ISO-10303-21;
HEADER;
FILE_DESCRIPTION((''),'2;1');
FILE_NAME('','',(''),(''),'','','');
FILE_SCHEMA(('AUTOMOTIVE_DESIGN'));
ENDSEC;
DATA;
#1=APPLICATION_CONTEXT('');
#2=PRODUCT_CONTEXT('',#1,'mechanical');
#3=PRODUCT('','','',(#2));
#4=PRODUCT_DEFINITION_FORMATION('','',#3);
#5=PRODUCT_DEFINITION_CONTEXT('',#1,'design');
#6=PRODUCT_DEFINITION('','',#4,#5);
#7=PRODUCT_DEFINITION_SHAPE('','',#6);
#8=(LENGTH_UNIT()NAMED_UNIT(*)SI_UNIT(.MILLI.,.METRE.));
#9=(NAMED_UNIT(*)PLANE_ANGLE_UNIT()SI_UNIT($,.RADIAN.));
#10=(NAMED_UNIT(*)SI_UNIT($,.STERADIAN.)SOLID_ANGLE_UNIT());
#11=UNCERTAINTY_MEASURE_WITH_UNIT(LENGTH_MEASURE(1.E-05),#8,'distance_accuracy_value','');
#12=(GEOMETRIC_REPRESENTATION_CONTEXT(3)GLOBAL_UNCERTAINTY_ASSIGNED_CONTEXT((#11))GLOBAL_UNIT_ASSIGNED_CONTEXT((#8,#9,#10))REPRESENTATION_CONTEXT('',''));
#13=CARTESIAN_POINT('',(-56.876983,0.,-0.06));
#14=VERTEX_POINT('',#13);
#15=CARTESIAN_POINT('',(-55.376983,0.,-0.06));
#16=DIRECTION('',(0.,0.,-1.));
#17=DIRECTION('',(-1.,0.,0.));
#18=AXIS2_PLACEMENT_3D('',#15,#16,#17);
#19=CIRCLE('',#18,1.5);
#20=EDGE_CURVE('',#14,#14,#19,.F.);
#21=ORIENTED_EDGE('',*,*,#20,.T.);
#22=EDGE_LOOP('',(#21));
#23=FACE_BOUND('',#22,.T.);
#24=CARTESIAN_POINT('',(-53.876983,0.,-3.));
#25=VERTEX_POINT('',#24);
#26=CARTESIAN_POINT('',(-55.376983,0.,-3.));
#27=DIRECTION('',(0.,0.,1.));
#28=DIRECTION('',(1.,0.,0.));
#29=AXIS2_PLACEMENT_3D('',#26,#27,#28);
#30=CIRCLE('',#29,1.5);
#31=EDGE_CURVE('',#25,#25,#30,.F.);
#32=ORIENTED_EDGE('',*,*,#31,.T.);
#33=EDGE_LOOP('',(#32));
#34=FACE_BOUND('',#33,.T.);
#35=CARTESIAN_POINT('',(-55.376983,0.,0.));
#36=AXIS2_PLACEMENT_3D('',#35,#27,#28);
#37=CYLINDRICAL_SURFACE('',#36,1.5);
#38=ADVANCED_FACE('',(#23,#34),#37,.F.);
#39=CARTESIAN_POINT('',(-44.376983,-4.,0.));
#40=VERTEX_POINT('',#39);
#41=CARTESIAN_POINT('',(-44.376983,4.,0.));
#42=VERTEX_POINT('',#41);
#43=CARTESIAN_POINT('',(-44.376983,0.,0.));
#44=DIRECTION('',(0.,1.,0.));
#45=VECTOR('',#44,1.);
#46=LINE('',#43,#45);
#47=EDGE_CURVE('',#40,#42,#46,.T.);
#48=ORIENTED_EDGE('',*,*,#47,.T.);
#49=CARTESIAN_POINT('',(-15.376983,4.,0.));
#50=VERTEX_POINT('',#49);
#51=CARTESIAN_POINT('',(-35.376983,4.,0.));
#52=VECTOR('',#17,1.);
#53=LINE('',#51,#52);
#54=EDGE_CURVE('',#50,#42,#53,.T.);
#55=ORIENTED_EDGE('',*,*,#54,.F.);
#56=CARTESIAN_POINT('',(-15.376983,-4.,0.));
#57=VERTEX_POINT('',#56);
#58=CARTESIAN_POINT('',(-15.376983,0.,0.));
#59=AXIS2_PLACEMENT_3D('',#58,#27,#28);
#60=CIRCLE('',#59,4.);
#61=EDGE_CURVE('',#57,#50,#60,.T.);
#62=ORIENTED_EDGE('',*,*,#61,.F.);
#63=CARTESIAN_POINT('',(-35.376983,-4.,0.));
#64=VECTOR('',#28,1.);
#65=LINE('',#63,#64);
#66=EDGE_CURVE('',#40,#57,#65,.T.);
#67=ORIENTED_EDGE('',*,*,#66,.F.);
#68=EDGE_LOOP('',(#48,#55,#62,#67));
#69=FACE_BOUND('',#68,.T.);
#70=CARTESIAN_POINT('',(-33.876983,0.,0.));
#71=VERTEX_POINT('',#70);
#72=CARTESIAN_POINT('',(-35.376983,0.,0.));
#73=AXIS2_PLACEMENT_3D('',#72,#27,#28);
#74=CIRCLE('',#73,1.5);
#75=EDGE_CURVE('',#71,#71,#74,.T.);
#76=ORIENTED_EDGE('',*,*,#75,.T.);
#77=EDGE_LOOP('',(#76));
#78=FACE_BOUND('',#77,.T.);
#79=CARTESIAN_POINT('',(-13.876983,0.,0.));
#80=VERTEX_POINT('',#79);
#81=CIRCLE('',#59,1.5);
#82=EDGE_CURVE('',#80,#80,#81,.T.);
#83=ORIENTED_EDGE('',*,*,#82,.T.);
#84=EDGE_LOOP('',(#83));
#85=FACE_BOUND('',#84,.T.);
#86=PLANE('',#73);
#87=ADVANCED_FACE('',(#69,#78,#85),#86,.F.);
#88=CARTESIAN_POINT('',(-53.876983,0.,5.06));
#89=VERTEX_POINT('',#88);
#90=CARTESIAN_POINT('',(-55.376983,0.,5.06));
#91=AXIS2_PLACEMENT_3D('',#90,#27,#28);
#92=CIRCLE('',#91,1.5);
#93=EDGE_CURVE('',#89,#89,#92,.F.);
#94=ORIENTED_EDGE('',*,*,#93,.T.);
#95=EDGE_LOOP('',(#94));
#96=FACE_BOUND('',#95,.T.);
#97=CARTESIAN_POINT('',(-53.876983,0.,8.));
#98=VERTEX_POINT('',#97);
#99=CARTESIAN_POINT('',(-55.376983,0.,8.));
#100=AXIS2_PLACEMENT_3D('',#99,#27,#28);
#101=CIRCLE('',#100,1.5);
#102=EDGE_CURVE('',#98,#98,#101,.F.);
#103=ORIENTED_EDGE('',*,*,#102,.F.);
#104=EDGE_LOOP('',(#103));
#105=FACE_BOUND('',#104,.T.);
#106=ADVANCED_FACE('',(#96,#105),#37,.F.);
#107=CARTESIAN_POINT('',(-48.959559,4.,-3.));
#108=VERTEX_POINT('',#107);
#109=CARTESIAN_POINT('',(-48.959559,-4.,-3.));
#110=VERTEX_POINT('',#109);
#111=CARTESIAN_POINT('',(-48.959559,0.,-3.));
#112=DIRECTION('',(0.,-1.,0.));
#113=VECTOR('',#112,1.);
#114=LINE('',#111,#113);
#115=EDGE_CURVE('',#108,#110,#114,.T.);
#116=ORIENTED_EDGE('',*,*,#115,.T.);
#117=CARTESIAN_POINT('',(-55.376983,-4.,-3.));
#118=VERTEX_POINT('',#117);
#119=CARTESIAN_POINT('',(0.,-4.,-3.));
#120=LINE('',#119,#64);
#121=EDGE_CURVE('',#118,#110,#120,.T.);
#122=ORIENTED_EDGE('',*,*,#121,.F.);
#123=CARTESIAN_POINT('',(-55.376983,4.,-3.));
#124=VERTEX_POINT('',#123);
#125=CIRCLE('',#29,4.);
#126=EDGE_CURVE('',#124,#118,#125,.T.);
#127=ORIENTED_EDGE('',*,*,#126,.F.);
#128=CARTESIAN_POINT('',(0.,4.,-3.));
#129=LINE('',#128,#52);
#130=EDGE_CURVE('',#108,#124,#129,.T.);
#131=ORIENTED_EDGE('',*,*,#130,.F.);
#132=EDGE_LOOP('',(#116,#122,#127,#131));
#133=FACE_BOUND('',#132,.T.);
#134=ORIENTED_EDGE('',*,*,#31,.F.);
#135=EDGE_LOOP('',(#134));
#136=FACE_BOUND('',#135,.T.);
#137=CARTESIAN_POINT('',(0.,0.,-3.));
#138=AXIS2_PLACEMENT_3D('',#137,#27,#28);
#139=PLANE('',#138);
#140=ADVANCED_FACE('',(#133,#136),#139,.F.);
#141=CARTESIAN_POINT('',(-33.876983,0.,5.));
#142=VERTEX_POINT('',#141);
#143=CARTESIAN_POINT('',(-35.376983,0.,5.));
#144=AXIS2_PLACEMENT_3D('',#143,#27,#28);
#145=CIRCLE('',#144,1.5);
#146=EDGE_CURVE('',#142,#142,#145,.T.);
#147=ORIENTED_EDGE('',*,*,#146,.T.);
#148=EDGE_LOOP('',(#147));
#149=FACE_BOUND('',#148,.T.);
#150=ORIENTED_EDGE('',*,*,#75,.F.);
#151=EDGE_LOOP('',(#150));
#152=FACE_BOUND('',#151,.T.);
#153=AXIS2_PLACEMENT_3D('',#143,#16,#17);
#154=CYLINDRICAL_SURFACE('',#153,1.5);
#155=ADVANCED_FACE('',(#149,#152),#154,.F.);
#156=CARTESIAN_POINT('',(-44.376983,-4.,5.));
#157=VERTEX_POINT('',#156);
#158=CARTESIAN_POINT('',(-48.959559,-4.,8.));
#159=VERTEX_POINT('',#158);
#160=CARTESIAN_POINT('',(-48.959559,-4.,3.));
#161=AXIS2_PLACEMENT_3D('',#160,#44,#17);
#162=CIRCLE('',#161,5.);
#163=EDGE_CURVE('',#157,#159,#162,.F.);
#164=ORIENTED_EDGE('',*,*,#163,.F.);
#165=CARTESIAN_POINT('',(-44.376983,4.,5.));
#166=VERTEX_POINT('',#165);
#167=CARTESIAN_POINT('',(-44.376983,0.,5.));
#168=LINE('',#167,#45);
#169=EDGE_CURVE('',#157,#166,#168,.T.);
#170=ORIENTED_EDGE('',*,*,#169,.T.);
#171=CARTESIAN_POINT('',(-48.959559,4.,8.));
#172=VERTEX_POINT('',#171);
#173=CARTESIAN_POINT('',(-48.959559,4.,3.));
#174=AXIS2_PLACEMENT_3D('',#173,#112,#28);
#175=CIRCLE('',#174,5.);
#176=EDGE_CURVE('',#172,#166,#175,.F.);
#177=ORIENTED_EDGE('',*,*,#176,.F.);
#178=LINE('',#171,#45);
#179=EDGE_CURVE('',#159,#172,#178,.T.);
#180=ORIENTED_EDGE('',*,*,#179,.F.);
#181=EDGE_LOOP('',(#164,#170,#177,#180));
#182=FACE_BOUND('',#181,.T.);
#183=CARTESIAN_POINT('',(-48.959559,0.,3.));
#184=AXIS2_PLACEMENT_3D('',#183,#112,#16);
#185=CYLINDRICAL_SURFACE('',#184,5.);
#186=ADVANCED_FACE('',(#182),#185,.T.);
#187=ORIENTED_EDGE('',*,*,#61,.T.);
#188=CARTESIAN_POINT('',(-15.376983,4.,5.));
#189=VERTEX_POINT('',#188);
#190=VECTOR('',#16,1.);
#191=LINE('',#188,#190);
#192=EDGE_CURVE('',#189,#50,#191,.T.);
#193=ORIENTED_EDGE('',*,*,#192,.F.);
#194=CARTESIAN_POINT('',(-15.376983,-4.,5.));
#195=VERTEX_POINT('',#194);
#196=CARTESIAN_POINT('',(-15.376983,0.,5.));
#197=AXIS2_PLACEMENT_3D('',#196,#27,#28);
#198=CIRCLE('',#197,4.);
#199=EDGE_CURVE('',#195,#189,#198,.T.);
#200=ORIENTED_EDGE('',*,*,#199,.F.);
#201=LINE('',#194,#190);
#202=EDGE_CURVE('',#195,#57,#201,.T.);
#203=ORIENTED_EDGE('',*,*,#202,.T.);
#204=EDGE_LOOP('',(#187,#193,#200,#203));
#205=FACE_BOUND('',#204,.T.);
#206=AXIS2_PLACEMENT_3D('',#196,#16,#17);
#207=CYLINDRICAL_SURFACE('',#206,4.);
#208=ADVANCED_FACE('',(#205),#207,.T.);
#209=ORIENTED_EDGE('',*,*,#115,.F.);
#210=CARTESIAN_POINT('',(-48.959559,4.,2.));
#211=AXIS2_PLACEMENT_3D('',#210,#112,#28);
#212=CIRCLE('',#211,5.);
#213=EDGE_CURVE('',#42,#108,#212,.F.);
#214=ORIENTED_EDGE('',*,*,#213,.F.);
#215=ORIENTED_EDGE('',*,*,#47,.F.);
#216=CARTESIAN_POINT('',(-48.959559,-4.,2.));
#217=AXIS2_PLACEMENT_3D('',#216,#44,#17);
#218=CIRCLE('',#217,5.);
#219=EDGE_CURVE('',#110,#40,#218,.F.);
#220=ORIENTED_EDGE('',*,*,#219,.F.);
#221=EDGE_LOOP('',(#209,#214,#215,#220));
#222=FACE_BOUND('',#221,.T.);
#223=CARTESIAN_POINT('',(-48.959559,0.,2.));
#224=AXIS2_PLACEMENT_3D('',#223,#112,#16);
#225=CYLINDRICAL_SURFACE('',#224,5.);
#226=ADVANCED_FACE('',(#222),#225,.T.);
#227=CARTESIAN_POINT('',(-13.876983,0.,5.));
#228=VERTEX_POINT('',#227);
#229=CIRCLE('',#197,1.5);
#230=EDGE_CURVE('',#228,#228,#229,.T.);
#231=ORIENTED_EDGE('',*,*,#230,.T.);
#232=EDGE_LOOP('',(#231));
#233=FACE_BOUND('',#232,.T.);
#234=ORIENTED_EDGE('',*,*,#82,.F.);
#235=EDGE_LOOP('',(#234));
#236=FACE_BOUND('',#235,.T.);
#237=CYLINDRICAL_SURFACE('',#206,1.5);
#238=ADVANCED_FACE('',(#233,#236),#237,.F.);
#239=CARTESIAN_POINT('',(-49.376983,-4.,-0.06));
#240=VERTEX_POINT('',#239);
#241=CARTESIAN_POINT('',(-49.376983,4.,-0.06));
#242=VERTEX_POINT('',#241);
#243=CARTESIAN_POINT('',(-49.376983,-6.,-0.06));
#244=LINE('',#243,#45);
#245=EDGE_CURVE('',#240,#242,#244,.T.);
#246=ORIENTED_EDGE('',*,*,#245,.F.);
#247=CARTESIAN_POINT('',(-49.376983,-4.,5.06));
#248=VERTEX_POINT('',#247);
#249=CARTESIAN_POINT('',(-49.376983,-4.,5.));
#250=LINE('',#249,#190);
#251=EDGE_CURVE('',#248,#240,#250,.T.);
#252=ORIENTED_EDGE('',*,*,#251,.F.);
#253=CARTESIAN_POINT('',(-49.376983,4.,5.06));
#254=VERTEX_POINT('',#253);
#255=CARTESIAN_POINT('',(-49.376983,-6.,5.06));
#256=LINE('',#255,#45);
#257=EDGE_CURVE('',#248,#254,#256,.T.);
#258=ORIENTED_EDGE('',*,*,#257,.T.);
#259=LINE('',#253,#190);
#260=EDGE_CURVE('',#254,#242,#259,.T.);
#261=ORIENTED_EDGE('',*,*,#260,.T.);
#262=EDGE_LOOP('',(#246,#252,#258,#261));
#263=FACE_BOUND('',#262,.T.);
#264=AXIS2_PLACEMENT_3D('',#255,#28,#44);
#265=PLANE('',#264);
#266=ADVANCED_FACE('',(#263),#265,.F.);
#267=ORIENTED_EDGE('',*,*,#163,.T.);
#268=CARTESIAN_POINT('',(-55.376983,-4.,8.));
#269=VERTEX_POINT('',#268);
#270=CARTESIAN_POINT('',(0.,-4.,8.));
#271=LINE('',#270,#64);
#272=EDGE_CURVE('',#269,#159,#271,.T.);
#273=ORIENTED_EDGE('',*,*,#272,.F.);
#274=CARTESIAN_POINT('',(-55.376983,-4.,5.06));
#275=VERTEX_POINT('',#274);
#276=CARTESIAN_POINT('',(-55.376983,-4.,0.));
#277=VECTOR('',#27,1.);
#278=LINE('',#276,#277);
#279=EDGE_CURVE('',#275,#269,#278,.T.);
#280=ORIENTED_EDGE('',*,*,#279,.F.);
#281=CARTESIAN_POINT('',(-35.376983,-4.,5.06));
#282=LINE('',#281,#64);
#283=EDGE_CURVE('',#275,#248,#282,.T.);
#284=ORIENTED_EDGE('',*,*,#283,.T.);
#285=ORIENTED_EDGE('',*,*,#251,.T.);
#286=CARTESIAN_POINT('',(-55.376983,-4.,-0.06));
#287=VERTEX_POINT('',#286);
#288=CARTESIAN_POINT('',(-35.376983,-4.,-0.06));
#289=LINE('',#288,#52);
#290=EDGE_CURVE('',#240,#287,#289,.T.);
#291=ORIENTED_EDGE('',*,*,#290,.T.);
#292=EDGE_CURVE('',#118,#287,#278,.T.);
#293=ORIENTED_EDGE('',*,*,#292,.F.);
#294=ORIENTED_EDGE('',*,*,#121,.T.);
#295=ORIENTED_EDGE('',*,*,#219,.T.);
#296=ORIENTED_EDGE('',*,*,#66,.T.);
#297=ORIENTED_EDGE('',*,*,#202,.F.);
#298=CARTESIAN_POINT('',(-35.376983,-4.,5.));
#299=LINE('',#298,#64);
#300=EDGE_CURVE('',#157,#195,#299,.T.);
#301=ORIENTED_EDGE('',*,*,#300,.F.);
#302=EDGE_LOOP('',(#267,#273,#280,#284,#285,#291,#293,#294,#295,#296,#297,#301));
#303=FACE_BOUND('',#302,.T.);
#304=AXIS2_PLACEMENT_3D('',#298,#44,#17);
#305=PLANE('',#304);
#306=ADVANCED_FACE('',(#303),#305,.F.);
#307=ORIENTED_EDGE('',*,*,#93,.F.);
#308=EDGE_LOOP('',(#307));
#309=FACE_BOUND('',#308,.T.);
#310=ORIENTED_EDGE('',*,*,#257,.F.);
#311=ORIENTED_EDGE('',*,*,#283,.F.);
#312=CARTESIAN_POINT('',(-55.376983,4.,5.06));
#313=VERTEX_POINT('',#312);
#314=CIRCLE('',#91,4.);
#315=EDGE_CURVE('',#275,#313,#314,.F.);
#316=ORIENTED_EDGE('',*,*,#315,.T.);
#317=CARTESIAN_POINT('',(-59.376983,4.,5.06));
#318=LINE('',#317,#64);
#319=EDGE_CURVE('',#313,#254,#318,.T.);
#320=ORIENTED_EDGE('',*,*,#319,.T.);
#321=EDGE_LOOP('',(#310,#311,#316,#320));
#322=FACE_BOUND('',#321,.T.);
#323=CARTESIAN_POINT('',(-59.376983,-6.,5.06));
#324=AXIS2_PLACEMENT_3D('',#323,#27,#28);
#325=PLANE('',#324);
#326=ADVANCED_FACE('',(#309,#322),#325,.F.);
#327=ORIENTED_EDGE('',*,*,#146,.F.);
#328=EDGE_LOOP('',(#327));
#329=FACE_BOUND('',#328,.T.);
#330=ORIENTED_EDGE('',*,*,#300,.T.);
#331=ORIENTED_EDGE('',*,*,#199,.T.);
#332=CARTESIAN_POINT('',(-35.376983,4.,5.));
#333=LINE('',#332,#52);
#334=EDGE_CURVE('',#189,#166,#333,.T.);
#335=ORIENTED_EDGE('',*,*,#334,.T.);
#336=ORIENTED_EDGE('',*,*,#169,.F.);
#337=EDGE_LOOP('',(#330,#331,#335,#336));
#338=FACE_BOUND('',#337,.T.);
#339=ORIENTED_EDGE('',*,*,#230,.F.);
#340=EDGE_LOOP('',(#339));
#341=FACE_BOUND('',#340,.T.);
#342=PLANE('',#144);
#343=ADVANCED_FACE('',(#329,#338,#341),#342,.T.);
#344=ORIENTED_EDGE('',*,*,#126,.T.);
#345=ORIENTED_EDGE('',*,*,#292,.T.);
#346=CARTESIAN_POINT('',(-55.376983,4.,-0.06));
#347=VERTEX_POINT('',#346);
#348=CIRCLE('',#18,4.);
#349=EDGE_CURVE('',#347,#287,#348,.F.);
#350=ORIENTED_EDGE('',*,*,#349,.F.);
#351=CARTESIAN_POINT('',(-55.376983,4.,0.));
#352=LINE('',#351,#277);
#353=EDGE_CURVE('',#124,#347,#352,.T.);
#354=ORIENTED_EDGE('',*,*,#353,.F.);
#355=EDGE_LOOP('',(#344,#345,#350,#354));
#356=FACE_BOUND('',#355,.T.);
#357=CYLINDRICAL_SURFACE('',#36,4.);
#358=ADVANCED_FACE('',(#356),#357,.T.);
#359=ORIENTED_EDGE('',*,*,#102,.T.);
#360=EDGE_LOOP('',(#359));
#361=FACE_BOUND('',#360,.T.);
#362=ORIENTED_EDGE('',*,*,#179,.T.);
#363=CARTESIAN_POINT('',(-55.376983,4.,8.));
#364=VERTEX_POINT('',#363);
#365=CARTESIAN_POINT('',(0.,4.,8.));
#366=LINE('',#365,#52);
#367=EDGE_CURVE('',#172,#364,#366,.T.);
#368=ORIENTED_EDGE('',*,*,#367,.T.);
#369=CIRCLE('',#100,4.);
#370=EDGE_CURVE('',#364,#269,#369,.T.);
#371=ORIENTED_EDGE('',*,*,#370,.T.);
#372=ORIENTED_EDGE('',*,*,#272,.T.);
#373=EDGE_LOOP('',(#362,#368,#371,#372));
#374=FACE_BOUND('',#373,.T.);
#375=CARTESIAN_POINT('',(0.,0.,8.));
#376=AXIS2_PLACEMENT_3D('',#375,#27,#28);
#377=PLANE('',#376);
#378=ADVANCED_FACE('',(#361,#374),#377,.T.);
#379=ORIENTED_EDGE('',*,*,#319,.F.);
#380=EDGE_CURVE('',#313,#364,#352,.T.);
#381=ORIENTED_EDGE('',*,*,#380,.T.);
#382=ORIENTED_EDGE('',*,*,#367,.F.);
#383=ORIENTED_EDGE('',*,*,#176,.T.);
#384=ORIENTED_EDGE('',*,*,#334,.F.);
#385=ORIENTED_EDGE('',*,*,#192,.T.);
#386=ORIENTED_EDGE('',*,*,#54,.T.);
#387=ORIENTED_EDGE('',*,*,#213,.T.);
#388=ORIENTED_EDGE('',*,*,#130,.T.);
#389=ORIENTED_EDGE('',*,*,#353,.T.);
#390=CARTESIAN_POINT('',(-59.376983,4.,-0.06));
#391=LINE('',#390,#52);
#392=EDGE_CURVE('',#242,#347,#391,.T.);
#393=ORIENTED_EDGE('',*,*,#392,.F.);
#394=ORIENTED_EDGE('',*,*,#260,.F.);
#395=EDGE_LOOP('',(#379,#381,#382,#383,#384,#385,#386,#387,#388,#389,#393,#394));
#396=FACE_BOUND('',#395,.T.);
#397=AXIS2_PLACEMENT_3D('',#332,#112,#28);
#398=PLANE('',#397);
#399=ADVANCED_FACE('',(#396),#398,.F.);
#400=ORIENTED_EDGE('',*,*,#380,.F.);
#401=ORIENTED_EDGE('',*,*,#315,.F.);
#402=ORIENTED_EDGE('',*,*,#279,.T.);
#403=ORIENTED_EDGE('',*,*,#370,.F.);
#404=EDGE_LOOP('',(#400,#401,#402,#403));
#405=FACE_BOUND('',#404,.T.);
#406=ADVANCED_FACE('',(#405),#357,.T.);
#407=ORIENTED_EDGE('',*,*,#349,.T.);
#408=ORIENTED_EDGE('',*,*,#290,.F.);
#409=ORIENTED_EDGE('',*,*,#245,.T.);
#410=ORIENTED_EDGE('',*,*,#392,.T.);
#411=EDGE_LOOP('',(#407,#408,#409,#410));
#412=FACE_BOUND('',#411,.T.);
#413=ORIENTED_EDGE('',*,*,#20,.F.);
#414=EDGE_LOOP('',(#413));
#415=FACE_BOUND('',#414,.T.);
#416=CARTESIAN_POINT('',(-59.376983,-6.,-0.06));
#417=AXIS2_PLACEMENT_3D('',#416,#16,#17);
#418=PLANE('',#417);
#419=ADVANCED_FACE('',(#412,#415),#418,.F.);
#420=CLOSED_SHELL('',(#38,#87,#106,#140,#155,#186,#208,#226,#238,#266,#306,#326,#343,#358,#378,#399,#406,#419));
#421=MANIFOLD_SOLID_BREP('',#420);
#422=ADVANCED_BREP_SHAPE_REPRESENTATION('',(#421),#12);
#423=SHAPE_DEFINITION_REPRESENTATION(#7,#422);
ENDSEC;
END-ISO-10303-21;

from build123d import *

# Parameters (mm, degrees)
SKETCH1_R                = 1.5
BOSS_EXTRUDE1_DEPTH      = 5
BOSS_EXTRUDE3_START      = -5
SKETCH3_R                = 1.5
BOSS_EXTRUDE3_DEPTH      = 5
BOSS_EXTRUDE5_DEPTH      = 6
BOSS_EXTRUDE5_DEPTH_BACK = 5
BOSS_EXTRUDE5_START      = -3
SKETCH5_R                = 1.5
SKETCH6_W                = 10
SKETCH6_H                = 5.12
CUT_EXTRUDE1_DEPTH       = 10
FILLET1_R                = 5


with BuildPart() as part:
    # Sketch1 → Boss-Extrude1 (new body)
    with BuildSketch(Plane.XY):
        with BuildLine():
            Line((-35.37698341, 4), (-15.37698341, 4))
            ThreePointArc((-15.37698341, 4), (-11.37698341, 0), (-15.37698341, -4))
            Line((-15.37698341, -4), (-35.37698341, -4))
            ThreePointArc((-35.37698341, -4), (-39.37698341, 0), (-35.37698341, 4))
        make_face()
        with Locations((-35.37698341, 0)):
            Circle(SKETCH1_R, mode=Mode.SUBTRACT)
        with Locations((-15.37698341, 0)):
            Circle(SKETCH1_R, mode=Mode.SUBTRACT)
    extrude(amount=BOSS_EXTRUDE1_DEPTH)

    # Sketch3 → Boss-Extrude3 (add)
    with BuildSketch(Plane.XY.offset(5).offset(BOSS_EXTRUDE3_START)):
        with BuildLine():
            Line((-55.37698341, -4), (-35.37698341, -4))
            ThreePointArc((-35.37698341, -4), (-39.37698341, 0), (-35.37698341, 4))
            Line((-35.37698341, 4), (-55.37698341, 4))
            ThreePointArc((-55.37698341, 4), (-59.37698341, 0), (-55.37698341, -4))
        make_face()
        with Locations((-55.37698341, 0)):
            Circle(SKETCH3_R, mode=Mode.SUBTRACT)
    extrude(amount=BOSS_EXTRUDE3_DEPTH)

    # Sketch5 → Boss-Extrude5 (add, two sides: drawn at the far end of the back side and taken through both)
    with BuildSketch(Plane.XY.offset(5).offset(BOSS_EXTRUDE5_START - BOSS_EXTRUDE5_DEPTH_BACK)):
        with BuildLine():
            Line((-44.37698341, -4), (-44.37698341, 4))
            Line((-44.37698341, 4), (-55.37698341, 4))
            ThreePointArc((-55.37698341, 4), (-59.37698341, 0), (-55.37698341, -4))
            Line((-55.37698341, -4), (-44.37698341, -4))
        make_face()
        with Locations((-55.37698341, 0)):
            Circle(SKETCH5_R, mode=Mode.SUBTRACT)
    extrude(amount=BOSS_EXTRUDE5_DEPTH + BOSS_EXTRUDE5_DEPTH_BACK)

    # Sketch6 → Cut-Extrude1 (cut)
    with BuildSketch(Plane(origin=(0, 4, 0), x_dir=(1, 0, 0), z_dir=(0, 1, 0))):
        with Locations((-54.37698341, -2.5)):
            Rectangle(SKETCH6_W, SKETCH6_H)
    extrude(amount=-CUT_EXTRUDE1_DEPTH, mode=Mode.SUBTRACT)

    # Fillet1
    # the kernel refuses this fillet: 5 mm, written as the material it takes off along each edge
    with BuildSketch(Plane(origin=(-44.37698341, -15.456439237, -3), x_dir=(0, 0, 1), z_dir=(0, 1, 0))) as fillet1_piece_1:
        with BuildLine():
            CenterArc((5, -4.582575695), FILLET1_R, 113.578178478, 66.421821522)
            Line((0, -4.582575695), (-0.1, -4.582575695))
            Line((-0.1, -4.582575695), (-0.1, 0))
            Line((-0.1, 0), (0, 0.1))
            ThreePointArc((0, 0.1), (1.5, 0.1), (2.96, 0.091651514))
            Line((2.96, 0.091651514), (3, 0))
        make_face()
    extrude(amount=30.912878475, mode=Mode.SUBTRACT)
    with BuildSketch(Plane(origin=(-44.37698341, -15.456439237, 8), x_dir=(-1, 0, 0), z_dir=(0, 1, 0))) as fillet1_piece_2:
        with BuildLine():
            CenterArc((4.582575695, -5), FILLET1_R, 90, 66.421821522)
            Line((0, -3), (-0.091651514, -2.96))
            ThreePointArc((-0.091651514, -2.96), (-0.1, -1.5), (-0.1, 0))
            Line((-0.1, 0), (0, 0.1))
            Line((0, 0.1), (4.582575695, 0.1))
            Line((4.582575695, 0.1), (4.582575695, 0))
        make_face()
    extrude(amount=30.912878475, mode=Mode.SUBTRACT)


solid = part.part
